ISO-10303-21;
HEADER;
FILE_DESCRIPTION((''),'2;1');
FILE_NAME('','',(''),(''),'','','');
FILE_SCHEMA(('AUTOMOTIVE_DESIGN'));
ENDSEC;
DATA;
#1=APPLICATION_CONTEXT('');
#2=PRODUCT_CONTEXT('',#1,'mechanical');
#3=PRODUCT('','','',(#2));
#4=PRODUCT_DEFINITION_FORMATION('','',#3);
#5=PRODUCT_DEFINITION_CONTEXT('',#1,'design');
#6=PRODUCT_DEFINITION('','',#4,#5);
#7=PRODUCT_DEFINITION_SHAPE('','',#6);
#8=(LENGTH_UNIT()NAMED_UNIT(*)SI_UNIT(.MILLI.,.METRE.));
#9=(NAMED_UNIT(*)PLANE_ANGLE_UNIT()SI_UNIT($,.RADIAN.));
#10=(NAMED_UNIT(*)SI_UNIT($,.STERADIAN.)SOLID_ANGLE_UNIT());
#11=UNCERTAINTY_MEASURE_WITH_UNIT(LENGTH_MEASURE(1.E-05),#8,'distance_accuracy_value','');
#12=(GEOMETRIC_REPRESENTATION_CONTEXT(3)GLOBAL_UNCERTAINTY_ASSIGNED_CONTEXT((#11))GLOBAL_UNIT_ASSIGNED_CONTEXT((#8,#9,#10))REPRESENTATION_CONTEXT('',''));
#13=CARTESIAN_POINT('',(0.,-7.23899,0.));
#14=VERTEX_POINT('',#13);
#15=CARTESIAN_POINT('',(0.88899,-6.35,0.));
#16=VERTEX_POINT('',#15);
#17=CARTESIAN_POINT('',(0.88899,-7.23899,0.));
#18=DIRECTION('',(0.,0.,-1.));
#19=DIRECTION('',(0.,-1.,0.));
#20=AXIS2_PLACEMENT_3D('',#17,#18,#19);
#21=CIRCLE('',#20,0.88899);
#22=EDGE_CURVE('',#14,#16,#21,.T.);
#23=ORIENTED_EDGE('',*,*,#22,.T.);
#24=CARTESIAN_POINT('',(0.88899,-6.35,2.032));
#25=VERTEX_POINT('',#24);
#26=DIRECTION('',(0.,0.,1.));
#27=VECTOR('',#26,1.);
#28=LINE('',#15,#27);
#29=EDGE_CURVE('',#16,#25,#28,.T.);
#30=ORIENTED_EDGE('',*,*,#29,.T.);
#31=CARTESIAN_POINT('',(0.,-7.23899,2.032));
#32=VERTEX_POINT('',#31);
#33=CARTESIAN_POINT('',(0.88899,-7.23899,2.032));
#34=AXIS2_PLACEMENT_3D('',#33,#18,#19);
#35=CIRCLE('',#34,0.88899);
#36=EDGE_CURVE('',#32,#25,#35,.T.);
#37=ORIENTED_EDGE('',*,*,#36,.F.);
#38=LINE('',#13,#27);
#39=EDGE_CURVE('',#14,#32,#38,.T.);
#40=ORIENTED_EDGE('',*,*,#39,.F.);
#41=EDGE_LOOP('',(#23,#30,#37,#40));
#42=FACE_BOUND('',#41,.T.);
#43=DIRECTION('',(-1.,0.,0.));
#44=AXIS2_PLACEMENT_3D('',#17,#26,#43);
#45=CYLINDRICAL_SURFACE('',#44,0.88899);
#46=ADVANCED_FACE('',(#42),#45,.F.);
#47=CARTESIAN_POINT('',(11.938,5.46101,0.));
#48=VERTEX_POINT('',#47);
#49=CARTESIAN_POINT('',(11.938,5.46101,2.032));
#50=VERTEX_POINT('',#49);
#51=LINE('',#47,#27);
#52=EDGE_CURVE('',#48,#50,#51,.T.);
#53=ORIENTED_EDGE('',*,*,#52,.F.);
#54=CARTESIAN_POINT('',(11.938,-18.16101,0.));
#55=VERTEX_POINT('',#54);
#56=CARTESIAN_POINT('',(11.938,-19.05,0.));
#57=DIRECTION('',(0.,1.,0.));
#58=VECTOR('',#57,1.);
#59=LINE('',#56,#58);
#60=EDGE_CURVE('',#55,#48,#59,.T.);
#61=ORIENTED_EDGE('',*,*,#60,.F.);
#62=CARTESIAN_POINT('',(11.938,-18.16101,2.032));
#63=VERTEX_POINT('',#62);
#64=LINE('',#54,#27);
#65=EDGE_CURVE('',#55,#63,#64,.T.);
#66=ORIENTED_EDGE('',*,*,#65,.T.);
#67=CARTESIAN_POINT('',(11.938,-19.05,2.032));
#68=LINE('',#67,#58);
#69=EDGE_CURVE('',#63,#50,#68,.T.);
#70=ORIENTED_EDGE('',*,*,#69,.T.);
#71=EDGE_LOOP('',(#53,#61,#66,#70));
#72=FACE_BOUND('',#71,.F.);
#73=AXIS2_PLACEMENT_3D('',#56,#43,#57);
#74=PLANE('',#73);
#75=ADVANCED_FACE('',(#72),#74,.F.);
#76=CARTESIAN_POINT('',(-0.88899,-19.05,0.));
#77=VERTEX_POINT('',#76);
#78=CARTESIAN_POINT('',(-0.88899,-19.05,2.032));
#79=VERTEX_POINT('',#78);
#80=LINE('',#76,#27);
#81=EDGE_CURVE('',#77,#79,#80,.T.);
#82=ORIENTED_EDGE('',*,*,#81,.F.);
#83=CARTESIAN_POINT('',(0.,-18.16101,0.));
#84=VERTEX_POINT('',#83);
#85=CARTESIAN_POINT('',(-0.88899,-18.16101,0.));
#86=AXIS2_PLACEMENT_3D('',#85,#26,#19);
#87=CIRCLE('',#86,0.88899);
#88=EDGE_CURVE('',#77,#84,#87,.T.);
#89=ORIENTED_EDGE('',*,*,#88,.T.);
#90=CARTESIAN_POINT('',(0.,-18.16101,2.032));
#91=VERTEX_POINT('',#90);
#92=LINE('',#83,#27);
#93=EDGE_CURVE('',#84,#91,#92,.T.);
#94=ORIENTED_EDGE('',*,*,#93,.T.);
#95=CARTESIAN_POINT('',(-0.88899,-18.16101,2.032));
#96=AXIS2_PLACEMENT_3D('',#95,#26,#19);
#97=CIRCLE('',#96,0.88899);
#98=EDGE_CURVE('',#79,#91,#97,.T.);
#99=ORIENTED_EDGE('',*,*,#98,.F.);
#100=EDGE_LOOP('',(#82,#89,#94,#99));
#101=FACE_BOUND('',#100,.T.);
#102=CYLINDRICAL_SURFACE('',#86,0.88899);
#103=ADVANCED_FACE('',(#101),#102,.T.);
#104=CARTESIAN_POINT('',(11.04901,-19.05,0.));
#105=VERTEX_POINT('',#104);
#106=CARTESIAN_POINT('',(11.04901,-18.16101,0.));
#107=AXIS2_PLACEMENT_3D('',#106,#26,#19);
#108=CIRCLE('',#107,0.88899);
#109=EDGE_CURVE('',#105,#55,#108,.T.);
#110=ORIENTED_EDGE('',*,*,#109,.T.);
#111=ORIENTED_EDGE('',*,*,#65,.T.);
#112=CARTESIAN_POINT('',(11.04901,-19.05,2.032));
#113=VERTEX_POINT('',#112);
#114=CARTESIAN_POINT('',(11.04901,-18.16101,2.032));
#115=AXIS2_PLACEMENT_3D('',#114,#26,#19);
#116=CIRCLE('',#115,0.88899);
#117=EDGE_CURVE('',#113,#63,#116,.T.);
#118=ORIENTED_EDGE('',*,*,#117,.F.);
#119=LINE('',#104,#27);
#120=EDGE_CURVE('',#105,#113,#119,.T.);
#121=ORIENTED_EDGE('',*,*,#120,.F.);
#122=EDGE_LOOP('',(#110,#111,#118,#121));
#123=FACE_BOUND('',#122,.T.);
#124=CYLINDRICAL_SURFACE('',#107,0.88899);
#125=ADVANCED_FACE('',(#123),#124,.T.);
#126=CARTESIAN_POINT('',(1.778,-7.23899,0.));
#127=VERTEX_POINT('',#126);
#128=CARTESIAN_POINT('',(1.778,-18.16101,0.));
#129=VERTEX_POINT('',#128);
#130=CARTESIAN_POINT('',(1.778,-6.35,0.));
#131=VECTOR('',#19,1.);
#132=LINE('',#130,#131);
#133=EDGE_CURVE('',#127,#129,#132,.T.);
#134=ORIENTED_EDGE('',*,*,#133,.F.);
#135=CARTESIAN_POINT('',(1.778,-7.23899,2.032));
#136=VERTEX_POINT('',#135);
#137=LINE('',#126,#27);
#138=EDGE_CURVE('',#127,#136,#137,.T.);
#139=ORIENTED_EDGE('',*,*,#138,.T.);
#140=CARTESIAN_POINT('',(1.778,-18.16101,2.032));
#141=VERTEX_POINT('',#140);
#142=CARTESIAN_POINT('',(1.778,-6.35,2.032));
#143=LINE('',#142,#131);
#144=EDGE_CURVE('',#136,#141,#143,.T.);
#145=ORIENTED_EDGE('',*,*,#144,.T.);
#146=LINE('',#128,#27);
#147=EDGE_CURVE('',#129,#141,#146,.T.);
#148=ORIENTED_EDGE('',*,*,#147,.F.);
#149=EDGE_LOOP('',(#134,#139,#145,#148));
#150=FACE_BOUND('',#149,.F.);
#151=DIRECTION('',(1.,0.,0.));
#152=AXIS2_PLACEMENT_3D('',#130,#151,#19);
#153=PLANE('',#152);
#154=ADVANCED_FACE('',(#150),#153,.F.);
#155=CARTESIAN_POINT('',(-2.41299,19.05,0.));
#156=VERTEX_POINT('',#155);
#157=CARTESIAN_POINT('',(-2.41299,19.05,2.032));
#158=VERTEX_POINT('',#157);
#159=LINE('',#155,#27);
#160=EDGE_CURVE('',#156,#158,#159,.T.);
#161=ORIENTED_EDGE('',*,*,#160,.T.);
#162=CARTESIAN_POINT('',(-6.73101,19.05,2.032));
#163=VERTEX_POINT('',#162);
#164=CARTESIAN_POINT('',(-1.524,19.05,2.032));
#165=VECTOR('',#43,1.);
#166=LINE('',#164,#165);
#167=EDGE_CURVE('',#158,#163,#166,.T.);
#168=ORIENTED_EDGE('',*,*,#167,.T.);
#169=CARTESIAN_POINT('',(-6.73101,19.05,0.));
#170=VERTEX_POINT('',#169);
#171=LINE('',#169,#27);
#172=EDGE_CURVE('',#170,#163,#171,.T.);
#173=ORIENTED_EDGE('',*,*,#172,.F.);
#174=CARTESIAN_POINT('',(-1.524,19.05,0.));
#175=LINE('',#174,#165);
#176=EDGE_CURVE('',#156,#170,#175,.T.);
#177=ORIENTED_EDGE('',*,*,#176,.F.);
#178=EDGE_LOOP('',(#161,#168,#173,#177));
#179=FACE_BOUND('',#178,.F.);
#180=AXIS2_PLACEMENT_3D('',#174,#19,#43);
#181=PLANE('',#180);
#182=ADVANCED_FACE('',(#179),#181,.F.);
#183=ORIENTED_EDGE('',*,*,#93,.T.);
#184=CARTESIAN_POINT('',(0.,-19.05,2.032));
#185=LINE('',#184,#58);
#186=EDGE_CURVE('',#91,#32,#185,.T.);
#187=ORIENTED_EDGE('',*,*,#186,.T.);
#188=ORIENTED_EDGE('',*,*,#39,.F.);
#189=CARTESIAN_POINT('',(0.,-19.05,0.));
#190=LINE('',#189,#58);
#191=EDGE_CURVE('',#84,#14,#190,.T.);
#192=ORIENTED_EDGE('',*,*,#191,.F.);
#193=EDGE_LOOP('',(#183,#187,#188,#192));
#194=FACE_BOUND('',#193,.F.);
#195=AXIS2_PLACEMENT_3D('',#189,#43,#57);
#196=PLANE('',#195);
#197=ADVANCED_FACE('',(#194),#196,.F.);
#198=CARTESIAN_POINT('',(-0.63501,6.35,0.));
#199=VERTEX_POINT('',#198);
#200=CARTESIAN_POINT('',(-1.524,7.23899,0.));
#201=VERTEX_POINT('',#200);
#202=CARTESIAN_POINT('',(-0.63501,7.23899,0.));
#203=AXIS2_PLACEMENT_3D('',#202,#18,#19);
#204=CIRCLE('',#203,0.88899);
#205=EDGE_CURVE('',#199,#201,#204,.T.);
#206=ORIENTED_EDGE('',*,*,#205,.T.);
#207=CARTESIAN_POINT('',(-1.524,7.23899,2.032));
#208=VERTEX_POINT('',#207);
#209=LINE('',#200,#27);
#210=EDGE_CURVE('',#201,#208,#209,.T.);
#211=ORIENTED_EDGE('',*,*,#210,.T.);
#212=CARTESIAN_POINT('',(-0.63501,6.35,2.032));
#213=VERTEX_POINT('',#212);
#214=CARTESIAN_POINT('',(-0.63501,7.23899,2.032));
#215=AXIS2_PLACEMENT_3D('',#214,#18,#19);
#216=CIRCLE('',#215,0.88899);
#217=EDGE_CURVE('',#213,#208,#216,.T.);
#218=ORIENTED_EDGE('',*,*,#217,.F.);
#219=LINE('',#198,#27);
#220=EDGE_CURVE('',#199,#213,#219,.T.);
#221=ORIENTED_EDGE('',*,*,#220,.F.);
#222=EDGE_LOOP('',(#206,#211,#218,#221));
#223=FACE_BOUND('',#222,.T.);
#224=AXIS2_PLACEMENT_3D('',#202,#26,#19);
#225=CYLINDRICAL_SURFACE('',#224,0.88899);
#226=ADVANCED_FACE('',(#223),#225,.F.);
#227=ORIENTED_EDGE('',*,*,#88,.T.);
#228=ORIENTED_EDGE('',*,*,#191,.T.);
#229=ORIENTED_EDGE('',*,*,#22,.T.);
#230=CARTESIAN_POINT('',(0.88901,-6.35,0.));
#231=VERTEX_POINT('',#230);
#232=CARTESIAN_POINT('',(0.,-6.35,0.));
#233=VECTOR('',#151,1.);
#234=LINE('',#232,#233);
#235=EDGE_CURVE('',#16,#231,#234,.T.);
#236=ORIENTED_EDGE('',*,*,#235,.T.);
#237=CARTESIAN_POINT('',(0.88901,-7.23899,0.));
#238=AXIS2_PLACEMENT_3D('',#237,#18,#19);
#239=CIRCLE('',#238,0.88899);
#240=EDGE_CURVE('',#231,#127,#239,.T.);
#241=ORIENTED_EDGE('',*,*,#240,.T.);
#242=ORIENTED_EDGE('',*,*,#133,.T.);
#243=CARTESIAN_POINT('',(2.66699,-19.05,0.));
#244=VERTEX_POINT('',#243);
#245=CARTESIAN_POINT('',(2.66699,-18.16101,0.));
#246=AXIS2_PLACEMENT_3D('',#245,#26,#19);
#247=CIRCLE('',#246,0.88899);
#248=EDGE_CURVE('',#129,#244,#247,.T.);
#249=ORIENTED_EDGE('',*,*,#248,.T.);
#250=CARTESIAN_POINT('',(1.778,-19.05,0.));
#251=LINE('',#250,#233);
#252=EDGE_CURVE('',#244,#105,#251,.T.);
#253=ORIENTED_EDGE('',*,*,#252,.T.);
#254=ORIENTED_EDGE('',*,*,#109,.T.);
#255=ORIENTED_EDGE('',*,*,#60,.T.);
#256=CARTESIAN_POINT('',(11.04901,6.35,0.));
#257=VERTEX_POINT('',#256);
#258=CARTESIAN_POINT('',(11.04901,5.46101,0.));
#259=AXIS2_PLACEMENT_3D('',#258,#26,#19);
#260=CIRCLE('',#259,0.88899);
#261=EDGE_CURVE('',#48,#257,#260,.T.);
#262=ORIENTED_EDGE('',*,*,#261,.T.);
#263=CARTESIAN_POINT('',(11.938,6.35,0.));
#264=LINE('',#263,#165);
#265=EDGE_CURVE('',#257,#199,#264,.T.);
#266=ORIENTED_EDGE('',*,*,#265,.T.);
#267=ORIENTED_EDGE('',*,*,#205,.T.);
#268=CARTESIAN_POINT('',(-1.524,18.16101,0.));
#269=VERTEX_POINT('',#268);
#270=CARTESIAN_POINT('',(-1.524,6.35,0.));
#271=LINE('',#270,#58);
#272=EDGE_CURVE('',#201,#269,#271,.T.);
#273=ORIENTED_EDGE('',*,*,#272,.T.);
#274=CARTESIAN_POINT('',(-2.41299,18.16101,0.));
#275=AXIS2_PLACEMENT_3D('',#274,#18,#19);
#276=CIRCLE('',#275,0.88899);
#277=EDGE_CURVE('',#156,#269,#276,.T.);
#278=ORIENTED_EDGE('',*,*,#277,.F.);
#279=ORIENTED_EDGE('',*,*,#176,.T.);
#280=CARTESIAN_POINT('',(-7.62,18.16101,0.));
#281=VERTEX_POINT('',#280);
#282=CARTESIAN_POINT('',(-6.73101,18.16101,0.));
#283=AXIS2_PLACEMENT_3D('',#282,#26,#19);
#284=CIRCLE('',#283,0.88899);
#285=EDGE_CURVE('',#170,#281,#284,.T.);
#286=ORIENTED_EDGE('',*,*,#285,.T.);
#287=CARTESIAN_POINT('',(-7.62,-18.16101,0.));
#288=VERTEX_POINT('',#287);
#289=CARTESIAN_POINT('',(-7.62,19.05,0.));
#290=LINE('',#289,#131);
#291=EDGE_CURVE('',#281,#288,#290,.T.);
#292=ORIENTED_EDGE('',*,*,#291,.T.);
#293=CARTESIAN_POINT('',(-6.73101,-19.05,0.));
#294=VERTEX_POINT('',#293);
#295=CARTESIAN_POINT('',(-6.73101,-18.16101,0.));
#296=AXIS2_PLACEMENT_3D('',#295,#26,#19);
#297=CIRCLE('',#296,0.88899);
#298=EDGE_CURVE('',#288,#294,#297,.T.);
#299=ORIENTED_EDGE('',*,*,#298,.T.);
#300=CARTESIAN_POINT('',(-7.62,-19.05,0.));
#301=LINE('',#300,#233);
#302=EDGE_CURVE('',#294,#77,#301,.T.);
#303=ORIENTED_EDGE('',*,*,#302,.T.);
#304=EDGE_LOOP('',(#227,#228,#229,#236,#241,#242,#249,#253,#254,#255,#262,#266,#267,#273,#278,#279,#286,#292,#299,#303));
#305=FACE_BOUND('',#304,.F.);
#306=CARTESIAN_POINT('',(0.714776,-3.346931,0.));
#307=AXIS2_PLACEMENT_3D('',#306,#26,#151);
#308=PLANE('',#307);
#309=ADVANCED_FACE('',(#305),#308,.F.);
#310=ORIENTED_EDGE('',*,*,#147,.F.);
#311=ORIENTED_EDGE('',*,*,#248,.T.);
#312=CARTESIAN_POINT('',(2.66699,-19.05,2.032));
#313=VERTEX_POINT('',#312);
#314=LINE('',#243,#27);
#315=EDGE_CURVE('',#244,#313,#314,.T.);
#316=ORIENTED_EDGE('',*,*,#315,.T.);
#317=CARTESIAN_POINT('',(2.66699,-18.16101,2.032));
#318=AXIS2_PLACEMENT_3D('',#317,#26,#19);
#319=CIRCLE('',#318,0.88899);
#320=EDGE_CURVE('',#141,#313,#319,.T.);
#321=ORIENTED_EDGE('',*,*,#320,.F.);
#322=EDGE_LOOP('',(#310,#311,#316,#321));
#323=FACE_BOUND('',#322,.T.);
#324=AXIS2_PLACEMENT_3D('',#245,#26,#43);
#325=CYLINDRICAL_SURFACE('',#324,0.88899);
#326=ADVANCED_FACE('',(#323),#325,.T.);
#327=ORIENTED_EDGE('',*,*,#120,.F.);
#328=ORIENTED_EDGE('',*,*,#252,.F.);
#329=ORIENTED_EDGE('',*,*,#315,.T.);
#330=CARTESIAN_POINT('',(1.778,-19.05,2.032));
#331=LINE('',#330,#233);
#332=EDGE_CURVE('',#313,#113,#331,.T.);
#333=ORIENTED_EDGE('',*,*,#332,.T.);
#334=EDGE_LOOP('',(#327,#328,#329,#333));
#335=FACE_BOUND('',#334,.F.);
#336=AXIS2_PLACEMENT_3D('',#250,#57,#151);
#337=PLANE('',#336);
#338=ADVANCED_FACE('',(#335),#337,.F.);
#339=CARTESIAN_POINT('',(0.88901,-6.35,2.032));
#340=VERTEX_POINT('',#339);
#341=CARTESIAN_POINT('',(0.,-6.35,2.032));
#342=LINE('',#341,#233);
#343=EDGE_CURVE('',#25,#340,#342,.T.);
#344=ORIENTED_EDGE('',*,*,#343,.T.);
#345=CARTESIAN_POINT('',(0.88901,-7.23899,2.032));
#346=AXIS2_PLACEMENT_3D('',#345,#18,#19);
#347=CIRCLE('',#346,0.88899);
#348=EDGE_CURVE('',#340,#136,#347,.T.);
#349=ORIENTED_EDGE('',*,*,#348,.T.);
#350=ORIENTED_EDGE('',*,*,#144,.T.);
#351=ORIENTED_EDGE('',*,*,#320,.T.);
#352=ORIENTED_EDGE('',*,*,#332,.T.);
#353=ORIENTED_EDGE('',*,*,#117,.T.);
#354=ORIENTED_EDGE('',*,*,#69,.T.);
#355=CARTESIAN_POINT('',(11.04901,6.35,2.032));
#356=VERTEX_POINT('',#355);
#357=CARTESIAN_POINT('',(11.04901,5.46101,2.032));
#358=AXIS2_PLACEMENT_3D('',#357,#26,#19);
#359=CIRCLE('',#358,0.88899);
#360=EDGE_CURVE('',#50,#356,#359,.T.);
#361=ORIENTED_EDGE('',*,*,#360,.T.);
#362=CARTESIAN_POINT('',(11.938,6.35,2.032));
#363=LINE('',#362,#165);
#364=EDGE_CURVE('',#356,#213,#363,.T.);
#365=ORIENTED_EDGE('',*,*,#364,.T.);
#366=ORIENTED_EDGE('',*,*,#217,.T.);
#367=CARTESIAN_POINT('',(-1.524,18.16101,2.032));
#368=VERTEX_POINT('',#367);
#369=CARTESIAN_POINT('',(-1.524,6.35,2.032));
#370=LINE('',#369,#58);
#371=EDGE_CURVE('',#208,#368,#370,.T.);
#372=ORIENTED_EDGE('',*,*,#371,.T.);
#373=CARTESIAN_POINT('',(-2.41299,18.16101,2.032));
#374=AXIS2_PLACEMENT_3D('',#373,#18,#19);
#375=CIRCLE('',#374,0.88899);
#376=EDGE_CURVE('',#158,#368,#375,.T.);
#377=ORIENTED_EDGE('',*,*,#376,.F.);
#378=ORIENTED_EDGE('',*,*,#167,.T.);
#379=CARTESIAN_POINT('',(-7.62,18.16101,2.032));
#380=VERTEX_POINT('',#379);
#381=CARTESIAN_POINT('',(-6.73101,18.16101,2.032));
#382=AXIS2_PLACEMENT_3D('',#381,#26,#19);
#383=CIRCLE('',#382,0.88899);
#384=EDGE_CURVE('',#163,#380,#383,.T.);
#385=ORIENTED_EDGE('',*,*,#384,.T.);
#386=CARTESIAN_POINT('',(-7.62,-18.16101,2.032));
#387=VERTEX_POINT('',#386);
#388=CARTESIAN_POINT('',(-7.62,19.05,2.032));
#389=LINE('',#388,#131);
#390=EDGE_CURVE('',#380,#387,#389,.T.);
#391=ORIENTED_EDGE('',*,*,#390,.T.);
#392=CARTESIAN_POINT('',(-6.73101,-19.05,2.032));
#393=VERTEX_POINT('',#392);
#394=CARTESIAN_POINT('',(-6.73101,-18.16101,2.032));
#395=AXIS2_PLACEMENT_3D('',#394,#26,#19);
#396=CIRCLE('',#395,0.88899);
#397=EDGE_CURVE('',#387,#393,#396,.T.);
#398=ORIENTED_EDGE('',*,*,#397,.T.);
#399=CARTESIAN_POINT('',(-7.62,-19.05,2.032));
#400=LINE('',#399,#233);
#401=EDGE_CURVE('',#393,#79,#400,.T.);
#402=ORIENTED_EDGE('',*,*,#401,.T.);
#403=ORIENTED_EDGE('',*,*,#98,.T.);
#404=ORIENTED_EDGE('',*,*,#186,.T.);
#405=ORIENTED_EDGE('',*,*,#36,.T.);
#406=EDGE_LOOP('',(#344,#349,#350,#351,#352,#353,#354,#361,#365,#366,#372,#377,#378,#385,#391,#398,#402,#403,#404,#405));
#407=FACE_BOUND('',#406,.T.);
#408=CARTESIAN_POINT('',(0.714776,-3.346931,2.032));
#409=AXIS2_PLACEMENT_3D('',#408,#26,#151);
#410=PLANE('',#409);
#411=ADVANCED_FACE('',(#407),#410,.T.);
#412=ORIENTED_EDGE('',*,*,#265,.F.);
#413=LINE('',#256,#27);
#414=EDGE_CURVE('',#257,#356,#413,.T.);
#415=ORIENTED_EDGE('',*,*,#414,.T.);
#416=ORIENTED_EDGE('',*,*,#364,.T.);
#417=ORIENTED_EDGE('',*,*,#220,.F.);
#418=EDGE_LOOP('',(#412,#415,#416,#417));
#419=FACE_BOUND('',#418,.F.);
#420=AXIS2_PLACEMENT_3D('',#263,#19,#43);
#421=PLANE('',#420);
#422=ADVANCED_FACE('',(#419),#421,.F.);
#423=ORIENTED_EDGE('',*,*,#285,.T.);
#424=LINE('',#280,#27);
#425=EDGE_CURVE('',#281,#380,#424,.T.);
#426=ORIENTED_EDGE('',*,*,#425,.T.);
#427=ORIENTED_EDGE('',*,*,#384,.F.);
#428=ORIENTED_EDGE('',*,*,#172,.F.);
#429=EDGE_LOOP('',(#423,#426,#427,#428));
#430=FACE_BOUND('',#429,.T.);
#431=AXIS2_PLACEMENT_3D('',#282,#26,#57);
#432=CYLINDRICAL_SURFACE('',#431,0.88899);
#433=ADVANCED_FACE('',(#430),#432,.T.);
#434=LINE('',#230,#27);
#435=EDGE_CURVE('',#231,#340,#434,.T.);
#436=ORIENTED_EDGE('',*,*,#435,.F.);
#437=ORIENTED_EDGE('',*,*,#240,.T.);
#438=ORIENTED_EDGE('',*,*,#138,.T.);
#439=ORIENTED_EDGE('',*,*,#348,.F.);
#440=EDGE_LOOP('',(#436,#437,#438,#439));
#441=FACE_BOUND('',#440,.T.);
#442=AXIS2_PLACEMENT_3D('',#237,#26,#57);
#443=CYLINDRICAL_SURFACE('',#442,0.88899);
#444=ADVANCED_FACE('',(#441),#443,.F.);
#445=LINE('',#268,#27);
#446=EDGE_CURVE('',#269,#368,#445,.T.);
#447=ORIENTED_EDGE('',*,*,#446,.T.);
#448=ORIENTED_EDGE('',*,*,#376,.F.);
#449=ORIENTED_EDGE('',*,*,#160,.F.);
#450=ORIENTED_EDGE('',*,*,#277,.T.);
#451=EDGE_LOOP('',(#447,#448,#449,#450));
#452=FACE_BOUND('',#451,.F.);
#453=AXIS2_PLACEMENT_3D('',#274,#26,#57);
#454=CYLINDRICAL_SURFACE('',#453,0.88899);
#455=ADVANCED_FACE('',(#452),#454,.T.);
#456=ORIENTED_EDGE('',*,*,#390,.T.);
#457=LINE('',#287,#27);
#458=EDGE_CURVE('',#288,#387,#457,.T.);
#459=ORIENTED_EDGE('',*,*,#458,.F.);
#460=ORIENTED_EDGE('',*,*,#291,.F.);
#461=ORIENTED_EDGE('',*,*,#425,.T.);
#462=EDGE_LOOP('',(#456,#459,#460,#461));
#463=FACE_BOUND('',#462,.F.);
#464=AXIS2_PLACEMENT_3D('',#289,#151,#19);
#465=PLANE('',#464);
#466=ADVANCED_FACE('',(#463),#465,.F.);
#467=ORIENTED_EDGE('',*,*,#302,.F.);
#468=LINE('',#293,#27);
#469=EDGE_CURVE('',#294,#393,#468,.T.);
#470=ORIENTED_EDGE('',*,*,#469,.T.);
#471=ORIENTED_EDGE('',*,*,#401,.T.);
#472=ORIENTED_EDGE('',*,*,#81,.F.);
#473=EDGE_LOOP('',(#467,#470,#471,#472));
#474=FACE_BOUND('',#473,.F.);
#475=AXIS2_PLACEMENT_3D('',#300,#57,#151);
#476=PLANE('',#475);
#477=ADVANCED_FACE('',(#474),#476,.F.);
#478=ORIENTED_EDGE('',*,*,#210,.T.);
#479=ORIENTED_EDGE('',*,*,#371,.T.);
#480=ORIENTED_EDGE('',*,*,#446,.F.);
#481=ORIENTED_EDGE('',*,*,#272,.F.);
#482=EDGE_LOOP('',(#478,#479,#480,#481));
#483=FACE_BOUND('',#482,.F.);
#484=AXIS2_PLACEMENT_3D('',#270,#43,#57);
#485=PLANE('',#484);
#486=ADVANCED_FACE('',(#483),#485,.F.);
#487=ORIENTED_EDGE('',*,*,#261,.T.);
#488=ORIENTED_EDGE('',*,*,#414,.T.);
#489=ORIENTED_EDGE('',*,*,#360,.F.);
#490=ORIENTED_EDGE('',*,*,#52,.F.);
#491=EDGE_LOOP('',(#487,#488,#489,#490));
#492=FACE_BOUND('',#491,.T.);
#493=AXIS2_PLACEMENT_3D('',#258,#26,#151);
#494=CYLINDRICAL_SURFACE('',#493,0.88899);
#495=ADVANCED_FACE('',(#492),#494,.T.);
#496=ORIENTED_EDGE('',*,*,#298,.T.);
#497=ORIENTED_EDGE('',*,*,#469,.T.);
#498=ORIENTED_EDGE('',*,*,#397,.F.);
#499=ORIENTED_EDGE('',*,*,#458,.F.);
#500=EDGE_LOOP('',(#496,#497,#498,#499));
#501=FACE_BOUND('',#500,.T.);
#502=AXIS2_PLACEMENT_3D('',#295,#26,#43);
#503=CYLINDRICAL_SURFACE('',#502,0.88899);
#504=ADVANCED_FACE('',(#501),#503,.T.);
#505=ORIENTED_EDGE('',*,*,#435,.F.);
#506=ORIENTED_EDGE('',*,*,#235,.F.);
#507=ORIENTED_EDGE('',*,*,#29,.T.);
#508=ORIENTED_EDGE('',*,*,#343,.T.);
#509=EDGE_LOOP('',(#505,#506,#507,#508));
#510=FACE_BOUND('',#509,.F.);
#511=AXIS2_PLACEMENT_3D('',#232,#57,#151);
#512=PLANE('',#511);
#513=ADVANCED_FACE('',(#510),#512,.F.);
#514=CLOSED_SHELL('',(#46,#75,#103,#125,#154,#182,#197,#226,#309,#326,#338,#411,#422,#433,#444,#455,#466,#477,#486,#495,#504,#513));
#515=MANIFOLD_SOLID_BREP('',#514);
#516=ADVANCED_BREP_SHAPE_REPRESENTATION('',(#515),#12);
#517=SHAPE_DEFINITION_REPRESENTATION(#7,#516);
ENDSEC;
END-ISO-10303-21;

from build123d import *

# Parameters (mm, degrees)
F1_DEPTH = 2.032
F2_R     = 0.88899


# Not quite as in the source:
# - a fillet or chamfer is up to 0.001 mm smaller than in the source, because OpenCascade refuses the exact size


with BuildPart() as f1:
    # F0 (on Top) → F1 (new body)
    with BuildSketch(Plane.XY):
        Polygon((-1.524, 19.05), (-7.62, 19.05), (-7.62, -19.05), (0, -19.05), (0, -6.35), (1.778, -6.35), (1.778, -19.05), (11.938, -19.05), (11.938, 6.35), (-1.524, 6.35), align=None)
    extrude(amount=F1_DEPTH)

    # F2 (radius 0.889 in the source; OpenCascade refuses exactly that, so slightly less here)
    f2_edges = [f1.edges().sort_by_distance(p)[0] for p in [
        (-7.62, -19.05, 1.016),
        (0, -19.05, 1.016),
        (0, -6.35, 1.016),
        (1.778, -19.05, 1.016),
        (11.938, -19.05, 1.016),
        (11.938, 6.35, 1.016),
        (-1.524, 19.05, 1.016),
        (1.778, -6.35, 1.016),
        (-7.62, 19.05, 1.016),
        (-1.524, 6.35, 1.016),
    ]]
    fillet(f2_edges, radius=F2_R)


solid = f1.part
